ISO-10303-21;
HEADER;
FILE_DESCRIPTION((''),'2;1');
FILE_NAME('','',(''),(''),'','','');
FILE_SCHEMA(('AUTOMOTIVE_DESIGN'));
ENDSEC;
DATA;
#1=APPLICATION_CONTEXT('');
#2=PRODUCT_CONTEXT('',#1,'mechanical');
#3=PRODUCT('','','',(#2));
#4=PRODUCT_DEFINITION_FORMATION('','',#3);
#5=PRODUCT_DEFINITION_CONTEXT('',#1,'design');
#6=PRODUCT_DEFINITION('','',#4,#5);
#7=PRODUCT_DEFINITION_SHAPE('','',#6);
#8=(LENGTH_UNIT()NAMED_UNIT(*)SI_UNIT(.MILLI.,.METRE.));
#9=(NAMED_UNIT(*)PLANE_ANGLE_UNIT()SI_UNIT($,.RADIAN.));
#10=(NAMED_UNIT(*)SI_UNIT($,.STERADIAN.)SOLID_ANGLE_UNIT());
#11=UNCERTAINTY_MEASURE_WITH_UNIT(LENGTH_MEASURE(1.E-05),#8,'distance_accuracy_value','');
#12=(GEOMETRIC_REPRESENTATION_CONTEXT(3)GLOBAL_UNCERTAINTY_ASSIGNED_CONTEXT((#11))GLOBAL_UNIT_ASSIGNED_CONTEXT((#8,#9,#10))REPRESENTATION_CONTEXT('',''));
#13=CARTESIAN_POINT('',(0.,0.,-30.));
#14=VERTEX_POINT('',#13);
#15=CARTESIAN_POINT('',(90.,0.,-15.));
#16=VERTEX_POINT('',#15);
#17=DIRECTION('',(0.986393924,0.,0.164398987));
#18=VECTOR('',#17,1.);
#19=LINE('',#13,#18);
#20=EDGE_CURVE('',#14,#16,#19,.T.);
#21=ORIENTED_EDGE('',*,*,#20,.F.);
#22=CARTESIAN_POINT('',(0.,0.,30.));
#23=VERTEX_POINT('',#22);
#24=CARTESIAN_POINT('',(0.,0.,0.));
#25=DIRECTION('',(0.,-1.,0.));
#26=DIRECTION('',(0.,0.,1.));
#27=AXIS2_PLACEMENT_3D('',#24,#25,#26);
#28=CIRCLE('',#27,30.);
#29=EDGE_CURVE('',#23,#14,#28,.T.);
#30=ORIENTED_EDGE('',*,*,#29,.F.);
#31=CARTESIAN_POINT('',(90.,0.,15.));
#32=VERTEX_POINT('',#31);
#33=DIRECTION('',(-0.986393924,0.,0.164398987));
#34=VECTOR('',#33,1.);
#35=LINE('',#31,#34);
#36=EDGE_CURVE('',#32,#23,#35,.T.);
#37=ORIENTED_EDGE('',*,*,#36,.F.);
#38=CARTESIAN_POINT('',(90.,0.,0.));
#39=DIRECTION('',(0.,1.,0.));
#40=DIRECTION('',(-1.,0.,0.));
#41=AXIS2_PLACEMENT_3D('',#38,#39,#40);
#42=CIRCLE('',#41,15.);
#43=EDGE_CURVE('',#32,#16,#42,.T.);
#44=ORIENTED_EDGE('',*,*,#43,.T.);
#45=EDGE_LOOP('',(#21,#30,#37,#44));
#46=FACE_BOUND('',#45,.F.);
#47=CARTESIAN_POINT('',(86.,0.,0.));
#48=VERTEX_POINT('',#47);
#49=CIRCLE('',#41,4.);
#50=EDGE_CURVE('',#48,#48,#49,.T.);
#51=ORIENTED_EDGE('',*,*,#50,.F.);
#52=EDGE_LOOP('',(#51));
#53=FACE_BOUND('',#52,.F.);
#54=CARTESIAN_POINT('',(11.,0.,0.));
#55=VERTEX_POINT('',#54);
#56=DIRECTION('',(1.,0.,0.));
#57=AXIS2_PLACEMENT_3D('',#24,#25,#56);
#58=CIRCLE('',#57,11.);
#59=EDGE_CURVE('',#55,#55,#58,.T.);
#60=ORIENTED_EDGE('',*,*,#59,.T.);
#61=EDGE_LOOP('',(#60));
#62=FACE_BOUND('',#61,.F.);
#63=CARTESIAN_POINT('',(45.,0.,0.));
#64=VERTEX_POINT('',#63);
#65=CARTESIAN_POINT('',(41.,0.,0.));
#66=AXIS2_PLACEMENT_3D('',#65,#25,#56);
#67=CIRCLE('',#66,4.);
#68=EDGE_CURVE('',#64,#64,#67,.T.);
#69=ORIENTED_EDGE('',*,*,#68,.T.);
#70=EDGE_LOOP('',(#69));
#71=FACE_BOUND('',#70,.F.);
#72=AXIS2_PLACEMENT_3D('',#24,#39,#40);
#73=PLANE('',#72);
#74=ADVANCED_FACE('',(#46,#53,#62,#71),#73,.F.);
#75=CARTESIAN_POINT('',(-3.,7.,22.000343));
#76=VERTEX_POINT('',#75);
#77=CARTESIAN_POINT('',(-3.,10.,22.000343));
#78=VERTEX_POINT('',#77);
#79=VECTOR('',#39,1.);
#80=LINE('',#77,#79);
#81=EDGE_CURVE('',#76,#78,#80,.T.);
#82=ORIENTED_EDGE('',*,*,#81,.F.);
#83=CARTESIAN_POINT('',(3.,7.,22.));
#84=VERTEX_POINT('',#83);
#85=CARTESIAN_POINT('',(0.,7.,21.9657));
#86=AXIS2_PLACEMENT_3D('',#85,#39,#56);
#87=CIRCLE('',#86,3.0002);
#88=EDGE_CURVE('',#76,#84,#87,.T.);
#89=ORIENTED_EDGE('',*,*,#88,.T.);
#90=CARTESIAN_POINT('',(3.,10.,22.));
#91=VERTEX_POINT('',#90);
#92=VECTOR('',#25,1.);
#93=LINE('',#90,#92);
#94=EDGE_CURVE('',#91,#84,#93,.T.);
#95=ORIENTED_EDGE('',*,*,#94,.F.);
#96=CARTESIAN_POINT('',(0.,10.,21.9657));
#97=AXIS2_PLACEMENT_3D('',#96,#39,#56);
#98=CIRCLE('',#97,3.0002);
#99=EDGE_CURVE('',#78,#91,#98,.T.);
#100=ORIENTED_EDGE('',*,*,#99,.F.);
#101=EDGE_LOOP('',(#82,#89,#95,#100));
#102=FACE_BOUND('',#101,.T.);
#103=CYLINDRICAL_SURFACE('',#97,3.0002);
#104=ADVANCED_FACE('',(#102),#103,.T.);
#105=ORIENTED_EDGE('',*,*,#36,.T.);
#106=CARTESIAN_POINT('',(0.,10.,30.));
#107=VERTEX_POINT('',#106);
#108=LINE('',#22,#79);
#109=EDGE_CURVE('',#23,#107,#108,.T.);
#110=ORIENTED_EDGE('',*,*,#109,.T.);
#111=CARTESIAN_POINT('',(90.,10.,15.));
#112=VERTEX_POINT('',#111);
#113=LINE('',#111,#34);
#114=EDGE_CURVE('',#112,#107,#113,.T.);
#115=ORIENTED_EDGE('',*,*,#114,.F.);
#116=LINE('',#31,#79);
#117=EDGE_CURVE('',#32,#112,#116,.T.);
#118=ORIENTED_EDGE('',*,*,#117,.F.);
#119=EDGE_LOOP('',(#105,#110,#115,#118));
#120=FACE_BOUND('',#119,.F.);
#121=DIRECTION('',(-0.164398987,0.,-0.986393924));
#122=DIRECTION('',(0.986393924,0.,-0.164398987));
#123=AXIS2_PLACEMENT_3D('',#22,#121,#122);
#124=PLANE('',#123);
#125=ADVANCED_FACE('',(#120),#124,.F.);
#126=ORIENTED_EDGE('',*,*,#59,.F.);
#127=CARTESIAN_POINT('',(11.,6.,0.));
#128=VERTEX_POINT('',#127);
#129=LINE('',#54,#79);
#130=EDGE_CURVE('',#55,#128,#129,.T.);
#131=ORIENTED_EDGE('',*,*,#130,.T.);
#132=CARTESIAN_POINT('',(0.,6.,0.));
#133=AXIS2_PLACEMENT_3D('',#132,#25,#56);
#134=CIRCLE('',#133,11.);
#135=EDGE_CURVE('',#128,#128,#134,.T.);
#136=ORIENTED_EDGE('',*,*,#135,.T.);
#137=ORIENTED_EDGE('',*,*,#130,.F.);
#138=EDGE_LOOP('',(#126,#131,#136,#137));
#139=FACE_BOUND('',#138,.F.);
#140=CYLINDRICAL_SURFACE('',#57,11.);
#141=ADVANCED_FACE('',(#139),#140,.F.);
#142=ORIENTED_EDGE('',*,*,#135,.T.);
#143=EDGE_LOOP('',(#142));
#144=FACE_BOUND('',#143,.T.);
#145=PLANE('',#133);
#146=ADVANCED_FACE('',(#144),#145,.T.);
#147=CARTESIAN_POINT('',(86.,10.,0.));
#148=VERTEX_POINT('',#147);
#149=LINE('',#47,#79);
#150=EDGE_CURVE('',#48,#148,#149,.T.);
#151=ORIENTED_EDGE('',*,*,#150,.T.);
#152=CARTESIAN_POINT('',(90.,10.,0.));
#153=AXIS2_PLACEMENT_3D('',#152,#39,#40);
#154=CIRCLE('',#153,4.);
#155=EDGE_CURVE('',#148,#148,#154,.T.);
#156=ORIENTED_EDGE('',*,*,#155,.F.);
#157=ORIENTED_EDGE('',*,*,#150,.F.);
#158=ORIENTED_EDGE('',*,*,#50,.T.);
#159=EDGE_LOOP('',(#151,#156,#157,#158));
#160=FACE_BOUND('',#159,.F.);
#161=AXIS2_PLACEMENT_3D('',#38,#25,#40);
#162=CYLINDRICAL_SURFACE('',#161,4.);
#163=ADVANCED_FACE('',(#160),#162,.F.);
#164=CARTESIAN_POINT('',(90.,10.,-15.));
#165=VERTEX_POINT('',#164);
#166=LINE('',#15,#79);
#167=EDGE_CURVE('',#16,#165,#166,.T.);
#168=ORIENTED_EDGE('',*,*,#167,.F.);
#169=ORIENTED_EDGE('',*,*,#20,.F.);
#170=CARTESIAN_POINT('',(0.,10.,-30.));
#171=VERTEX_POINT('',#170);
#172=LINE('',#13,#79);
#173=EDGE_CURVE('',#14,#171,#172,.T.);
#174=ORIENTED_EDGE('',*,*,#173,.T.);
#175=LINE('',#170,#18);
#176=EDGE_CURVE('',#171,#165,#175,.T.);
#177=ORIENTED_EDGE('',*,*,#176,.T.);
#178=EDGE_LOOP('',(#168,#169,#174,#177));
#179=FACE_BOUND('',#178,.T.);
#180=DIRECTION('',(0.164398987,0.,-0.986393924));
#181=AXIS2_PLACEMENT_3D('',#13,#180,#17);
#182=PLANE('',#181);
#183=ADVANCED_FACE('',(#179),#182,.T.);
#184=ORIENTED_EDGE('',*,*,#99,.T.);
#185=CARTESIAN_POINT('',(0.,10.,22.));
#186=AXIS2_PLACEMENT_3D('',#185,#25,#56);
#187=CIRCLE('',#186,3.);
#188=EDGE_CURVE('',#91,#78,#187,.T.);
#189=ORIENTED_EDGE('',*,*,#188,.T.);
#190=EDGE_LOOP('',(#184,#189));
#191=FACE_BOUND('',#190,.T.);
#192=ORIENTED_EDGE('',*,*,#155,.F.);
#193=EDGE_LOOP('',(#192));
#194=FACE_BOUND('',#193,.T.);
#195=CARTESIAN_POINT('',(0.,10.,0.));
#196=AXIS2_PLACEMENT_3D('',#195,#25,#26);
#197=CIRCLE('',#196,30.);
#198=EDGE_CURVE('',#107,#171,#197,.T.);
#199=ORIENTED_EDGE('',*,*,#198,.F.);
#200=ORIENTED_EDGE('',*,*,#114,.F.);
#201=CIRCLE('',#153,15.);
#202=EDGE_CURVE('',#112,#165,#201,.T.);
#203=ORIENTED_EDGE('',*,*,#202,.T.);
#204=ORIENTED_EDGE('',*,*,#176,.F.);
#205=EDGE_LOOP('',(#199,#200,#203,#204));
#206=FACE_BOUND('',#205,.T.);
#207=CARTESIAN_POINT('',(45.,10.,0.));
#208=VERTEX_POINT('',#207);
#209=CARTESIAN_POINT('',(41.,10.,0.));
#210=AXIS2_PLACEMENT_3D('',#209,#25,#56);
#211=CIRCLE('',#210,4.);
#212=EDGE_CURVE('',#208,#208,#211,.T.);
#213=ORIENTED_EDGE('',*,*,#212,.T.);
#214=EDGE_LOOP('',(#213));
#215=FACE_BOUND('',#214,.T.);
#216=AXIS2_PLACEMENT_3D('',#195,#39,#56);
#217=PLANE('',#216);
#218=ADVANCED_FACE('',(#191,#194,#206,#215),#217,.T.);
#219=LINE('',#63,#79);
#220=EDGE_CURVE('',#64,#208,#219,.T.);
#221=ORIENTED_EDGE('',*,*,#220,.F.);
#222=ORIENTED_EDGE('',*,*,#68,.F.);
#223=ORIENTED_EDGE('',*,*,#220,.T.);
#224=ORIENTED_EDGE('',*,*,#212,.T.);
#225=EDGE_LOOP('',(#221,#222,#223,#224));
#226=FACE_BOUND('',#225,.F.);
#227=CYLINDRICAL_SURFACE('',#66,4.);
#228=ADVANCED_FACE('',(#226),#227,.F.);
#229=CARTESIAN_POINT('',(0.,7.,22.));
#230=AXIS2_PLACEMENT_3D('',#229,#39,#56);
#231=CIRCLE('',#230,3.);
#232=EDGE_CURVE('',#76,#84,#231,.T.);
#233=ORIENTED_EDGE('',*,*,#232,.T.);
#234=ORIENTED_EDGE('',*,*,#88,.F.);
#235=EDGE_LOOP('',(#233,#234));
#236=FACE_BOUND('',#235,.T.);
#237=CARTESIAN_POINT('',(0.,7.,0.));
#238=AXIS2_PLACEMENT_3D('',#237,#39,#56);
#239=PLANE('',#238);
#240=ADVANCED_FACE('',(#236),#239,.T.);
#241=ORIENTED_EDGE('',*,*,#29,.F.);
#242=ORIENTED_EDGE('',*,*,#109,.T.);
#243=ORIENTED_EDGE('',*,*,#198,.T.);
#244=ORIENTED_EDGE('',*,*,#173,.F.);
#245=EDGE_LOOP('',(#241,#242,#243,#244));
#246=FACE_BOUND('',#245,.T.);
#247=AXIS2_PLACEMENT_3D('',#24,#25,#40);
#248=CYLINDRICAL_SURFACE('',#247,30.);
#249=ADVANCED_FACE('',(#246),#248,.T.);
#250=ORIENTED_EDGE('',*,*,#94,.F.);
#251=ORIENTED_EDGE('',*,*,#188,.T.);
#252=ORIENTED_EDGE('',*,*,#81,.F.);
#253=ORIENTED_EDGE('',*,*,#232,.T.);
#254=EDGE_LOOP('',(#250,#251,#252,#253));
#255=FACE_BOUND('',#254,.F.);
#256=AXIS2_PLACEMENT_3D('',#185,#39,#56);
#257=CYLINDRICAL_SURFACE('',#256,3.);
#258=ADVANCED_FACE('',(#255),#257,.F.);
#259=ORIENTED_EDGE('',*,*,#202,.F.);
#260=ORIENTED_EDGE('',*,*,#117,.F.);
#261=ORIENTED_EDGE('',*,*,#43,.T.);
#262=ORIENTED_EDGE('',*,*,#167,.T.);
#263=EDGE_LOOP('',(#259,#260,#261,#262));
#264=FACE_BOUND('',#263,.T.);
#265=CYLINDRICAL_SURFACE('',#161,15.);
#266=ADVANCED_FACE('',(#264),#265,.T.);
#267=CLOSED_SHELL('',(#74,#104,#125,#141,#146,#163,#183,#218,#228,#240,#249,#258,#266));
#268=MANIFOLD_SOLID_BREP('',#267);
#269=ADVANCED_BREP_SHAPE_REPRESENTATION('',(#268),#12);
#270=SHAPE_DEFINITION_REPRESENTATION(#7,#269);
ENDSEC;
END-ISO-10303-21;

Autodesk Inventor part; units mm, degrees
ref_plane "YZ Plane" through (0, 0, 0) normal (1, 0, 0) x (0, 1, 0)
ref_plane "XZ Plane" through (0, 0, 0) normal (0, 1, 0) x (-1, 0, 0)
ref_plane "XY Plane" through (0, 0, 0) normal (0, 0, 1) x (1, 0, 0)
sketch "Sketch1" plane through (0, 0, 0) normal (0, 1, 0) x (-1, 0, 0)
  circle A0 centre (0, 0) radius 22
  line L0 (0, 0) -> (0, -22)
  circle A1 centre (0, -22) radius 1.55
  circle A2 centre (0, -22) radius 3
  circle A3 centre (22, 0) radius 3
  circle A4 centre (22, 0) radius 1.55
  circle A5 centre (0, 22) radius 3
  circle A6 centre (0, 22) radius 1.55
  circle A7 centre (-22, 0) radius 3
  circle A8 centre (-22, 0) radius 1.55
  circle A9 centre (0, 0) radius 30
  line L1 (0, 0) -> (-90, 0)
  circle A10 centre (-90, 0) radius 4
  circle A11 centre (-90, 0) radius 15
  line L2 (0, -30) -> (-90, -15)
  line L3 (0, 30) -> (-90, 15)
  circle A12 centre (0, 0) radius 5
  dimension "d0" = 44
  dimension "d1" = 3.1
  dimension "d2" = 6
  dimension "d5" = 360
  dimension "d7" = 60
  dimension "d8" = 90
  dimension "d9" = 8
  dimension "d10" = 30
  dimension "d11" = 10
extrude "Extrusion1" add sketch "Sketch1" along normal blind 10 contours A0 A4 | A0 A4 | A4 A0 A3 | A0 A3 A4 | A3 A0 A2 L0 A12 L1 A7 A5 | A5 A0 A6 | A0 A6 A5 | A2 A0 A1 | A0 A1 L0 A2 | A6 A0 | A0 A6 | A1 A0 | A0 L0 A1 | A2 A0 A7 L1 A12 L0 | L0 A1 A0 A2 | A7 L1 A8 A0 | A0 A8 L1 A7 | A0 A1 L0 | A8 L1 A0 | A0 L1 A8 | A7 A0 A8 L1 | L1 A8 A0 A7 | L1 A8 A0 | A0 A8 L1 | A9 L2 L3 | A9 L1 A11 L3 | L2 A11 L1 A9 | A11
sketch "Sketch2" plane through (0, 0, 0) normal (0, -1, 0) x (1, 0, 0)
  circle A0 centre (0, 22) radius 1.5
  circle A1 centre (0, -22) radius 1.5
  circle A2 centre (22, 0) radius 1.5
  circle A3 centre (-22, 0) radius 1.5
  point P0 (0, 0)
  dimension "d16" = 3
  dimension "d17" = 3
  dimension "d19" = 3
  dimension "d21" = 3
extrude "Extrusion2" cut sketch "Sketch2" against normal blind 10
sketch "Sketch3" plane through (0, 10, 0) normal (0, 1, 0) x (1, 0, 0)
  circle A0 centre (0, -22) radius 1.5 projected
  line L0 (0, 0) -> (0, -22)
  circle A1 centre (-22, 0) radius 1.5 projected
  line L1 (0, 0) -> (-22, 0)
  circle A2 centre (0, 22) radius 1.5 projected
  line L2 (0, 0) -> (0, 22)
  circle A3 centre (22, 0) radius 1.5 projected
  line L3 (0, 0) -> (22, 0)
  circle A4 centre (0, -22) radius 3
  circle A5 centre (22, 0) radius 3
  circle A6 centre (0, 22) radius 3
  circle A7 centre (-22, 0) radius 3
  dimension "d24" = 6
  dimension "d27" = 360
extrude "Extrusion3" cut sketch "Sketch3" against normal blind 3
sketch "Sketch4" plane through (0, 0, 0) normal (0, -1, 0) x (1, 0, 0)
  circle A0 centre (0, 0) radius 5 projected
  circle A1 centre (0, 0) radius 7
  point P0 (0, 0)
  dimension "d31" = 14
extrude "Extrusion4" cut sketch "Sketch4" against normal blind 2.5
sketch "Sketch5" plane through (0, 0, 0) normal (0, -1, 0) x (1, 0, 0)
  circle A0 centre (0, 0) radius 11
  dimension "d34" = 22
extrude "Extrusion5" cut sketch "Sketch5" against normal blind 6
sketch "Sketch6" plane through (0, 0, 0) normal (0, -1, 0) x (1, 0, 0)
  circle A0 centre (-22, 0) radius 1.5 projected
  circle A1 centre (-22, 0) radius 1.5
  circle A2 centre (0, 21.9657) radius 1.5343
  circle A3 centre (22, 0) radius 3 projected
  circle A4 centre (22, 0) radius 1.5
  circle A5 centre (0, -22) radius 1.5 projected
  circle A6 centre (0, -22) radius 1.5
  circle A7 centre (0, 0) radius 5
extrude "Extrusion6" cut sketch "Sketch6" against normal blind 10 contours A0 | A2 | A4 | A5
sketch "Sketch7" plane through (0, 10, 0) normal (0, 1, 0) x (1, 0, 0)
  circle A0 centre (0, 0) radius 11 projected
  circle A1 centre (0, 0) radius 5
  point P0 (0, 0)
extrude "Extrusion7" add sketch "Sketch7" against normal blind 4 contours A1
sketch "Sketch8" plane through (0, 10, 0) normal (0, 1, 0) x (1, 0, 0)
  circle A0 centre (0, 22) radius 1.5 projected
  circle A1 centre (0, 22) radius 3
  circle A2 centre (22, 0) radius 1.5 projected
  circle A3 centre (22, 0) radius 3
  circle A4 centre (0, -21.9657) radius 1.5343 projected
  circle A5 centre (0, -21.9657) radius 3.0002
  circle A6 centre (-22, 0) radius 1.5 projected
  circle A7 centre (-22, 0) radius 3
  point P0 (0, 0)
extrude "Extrusion8" add sketch "Sketch8" against normal blind 10 contours A0 | A1 | A2 | A3 | A4 | A5 | A6 | A7
sketch "Sketch9" plane through (0, 0, 0) normal (0, -1, 0) x (1, 0, 0)
  circle A0 centre (90, 0) radius 4 projected
  circle A1 centre (41, 0) radius 4
  point P0 (0, 0)
  dimension "d44" = 8
extrude "Extrusion9" cut sketch "Sketch9" against normal blind 32.25 contours A1
properties part number "motormount2"
